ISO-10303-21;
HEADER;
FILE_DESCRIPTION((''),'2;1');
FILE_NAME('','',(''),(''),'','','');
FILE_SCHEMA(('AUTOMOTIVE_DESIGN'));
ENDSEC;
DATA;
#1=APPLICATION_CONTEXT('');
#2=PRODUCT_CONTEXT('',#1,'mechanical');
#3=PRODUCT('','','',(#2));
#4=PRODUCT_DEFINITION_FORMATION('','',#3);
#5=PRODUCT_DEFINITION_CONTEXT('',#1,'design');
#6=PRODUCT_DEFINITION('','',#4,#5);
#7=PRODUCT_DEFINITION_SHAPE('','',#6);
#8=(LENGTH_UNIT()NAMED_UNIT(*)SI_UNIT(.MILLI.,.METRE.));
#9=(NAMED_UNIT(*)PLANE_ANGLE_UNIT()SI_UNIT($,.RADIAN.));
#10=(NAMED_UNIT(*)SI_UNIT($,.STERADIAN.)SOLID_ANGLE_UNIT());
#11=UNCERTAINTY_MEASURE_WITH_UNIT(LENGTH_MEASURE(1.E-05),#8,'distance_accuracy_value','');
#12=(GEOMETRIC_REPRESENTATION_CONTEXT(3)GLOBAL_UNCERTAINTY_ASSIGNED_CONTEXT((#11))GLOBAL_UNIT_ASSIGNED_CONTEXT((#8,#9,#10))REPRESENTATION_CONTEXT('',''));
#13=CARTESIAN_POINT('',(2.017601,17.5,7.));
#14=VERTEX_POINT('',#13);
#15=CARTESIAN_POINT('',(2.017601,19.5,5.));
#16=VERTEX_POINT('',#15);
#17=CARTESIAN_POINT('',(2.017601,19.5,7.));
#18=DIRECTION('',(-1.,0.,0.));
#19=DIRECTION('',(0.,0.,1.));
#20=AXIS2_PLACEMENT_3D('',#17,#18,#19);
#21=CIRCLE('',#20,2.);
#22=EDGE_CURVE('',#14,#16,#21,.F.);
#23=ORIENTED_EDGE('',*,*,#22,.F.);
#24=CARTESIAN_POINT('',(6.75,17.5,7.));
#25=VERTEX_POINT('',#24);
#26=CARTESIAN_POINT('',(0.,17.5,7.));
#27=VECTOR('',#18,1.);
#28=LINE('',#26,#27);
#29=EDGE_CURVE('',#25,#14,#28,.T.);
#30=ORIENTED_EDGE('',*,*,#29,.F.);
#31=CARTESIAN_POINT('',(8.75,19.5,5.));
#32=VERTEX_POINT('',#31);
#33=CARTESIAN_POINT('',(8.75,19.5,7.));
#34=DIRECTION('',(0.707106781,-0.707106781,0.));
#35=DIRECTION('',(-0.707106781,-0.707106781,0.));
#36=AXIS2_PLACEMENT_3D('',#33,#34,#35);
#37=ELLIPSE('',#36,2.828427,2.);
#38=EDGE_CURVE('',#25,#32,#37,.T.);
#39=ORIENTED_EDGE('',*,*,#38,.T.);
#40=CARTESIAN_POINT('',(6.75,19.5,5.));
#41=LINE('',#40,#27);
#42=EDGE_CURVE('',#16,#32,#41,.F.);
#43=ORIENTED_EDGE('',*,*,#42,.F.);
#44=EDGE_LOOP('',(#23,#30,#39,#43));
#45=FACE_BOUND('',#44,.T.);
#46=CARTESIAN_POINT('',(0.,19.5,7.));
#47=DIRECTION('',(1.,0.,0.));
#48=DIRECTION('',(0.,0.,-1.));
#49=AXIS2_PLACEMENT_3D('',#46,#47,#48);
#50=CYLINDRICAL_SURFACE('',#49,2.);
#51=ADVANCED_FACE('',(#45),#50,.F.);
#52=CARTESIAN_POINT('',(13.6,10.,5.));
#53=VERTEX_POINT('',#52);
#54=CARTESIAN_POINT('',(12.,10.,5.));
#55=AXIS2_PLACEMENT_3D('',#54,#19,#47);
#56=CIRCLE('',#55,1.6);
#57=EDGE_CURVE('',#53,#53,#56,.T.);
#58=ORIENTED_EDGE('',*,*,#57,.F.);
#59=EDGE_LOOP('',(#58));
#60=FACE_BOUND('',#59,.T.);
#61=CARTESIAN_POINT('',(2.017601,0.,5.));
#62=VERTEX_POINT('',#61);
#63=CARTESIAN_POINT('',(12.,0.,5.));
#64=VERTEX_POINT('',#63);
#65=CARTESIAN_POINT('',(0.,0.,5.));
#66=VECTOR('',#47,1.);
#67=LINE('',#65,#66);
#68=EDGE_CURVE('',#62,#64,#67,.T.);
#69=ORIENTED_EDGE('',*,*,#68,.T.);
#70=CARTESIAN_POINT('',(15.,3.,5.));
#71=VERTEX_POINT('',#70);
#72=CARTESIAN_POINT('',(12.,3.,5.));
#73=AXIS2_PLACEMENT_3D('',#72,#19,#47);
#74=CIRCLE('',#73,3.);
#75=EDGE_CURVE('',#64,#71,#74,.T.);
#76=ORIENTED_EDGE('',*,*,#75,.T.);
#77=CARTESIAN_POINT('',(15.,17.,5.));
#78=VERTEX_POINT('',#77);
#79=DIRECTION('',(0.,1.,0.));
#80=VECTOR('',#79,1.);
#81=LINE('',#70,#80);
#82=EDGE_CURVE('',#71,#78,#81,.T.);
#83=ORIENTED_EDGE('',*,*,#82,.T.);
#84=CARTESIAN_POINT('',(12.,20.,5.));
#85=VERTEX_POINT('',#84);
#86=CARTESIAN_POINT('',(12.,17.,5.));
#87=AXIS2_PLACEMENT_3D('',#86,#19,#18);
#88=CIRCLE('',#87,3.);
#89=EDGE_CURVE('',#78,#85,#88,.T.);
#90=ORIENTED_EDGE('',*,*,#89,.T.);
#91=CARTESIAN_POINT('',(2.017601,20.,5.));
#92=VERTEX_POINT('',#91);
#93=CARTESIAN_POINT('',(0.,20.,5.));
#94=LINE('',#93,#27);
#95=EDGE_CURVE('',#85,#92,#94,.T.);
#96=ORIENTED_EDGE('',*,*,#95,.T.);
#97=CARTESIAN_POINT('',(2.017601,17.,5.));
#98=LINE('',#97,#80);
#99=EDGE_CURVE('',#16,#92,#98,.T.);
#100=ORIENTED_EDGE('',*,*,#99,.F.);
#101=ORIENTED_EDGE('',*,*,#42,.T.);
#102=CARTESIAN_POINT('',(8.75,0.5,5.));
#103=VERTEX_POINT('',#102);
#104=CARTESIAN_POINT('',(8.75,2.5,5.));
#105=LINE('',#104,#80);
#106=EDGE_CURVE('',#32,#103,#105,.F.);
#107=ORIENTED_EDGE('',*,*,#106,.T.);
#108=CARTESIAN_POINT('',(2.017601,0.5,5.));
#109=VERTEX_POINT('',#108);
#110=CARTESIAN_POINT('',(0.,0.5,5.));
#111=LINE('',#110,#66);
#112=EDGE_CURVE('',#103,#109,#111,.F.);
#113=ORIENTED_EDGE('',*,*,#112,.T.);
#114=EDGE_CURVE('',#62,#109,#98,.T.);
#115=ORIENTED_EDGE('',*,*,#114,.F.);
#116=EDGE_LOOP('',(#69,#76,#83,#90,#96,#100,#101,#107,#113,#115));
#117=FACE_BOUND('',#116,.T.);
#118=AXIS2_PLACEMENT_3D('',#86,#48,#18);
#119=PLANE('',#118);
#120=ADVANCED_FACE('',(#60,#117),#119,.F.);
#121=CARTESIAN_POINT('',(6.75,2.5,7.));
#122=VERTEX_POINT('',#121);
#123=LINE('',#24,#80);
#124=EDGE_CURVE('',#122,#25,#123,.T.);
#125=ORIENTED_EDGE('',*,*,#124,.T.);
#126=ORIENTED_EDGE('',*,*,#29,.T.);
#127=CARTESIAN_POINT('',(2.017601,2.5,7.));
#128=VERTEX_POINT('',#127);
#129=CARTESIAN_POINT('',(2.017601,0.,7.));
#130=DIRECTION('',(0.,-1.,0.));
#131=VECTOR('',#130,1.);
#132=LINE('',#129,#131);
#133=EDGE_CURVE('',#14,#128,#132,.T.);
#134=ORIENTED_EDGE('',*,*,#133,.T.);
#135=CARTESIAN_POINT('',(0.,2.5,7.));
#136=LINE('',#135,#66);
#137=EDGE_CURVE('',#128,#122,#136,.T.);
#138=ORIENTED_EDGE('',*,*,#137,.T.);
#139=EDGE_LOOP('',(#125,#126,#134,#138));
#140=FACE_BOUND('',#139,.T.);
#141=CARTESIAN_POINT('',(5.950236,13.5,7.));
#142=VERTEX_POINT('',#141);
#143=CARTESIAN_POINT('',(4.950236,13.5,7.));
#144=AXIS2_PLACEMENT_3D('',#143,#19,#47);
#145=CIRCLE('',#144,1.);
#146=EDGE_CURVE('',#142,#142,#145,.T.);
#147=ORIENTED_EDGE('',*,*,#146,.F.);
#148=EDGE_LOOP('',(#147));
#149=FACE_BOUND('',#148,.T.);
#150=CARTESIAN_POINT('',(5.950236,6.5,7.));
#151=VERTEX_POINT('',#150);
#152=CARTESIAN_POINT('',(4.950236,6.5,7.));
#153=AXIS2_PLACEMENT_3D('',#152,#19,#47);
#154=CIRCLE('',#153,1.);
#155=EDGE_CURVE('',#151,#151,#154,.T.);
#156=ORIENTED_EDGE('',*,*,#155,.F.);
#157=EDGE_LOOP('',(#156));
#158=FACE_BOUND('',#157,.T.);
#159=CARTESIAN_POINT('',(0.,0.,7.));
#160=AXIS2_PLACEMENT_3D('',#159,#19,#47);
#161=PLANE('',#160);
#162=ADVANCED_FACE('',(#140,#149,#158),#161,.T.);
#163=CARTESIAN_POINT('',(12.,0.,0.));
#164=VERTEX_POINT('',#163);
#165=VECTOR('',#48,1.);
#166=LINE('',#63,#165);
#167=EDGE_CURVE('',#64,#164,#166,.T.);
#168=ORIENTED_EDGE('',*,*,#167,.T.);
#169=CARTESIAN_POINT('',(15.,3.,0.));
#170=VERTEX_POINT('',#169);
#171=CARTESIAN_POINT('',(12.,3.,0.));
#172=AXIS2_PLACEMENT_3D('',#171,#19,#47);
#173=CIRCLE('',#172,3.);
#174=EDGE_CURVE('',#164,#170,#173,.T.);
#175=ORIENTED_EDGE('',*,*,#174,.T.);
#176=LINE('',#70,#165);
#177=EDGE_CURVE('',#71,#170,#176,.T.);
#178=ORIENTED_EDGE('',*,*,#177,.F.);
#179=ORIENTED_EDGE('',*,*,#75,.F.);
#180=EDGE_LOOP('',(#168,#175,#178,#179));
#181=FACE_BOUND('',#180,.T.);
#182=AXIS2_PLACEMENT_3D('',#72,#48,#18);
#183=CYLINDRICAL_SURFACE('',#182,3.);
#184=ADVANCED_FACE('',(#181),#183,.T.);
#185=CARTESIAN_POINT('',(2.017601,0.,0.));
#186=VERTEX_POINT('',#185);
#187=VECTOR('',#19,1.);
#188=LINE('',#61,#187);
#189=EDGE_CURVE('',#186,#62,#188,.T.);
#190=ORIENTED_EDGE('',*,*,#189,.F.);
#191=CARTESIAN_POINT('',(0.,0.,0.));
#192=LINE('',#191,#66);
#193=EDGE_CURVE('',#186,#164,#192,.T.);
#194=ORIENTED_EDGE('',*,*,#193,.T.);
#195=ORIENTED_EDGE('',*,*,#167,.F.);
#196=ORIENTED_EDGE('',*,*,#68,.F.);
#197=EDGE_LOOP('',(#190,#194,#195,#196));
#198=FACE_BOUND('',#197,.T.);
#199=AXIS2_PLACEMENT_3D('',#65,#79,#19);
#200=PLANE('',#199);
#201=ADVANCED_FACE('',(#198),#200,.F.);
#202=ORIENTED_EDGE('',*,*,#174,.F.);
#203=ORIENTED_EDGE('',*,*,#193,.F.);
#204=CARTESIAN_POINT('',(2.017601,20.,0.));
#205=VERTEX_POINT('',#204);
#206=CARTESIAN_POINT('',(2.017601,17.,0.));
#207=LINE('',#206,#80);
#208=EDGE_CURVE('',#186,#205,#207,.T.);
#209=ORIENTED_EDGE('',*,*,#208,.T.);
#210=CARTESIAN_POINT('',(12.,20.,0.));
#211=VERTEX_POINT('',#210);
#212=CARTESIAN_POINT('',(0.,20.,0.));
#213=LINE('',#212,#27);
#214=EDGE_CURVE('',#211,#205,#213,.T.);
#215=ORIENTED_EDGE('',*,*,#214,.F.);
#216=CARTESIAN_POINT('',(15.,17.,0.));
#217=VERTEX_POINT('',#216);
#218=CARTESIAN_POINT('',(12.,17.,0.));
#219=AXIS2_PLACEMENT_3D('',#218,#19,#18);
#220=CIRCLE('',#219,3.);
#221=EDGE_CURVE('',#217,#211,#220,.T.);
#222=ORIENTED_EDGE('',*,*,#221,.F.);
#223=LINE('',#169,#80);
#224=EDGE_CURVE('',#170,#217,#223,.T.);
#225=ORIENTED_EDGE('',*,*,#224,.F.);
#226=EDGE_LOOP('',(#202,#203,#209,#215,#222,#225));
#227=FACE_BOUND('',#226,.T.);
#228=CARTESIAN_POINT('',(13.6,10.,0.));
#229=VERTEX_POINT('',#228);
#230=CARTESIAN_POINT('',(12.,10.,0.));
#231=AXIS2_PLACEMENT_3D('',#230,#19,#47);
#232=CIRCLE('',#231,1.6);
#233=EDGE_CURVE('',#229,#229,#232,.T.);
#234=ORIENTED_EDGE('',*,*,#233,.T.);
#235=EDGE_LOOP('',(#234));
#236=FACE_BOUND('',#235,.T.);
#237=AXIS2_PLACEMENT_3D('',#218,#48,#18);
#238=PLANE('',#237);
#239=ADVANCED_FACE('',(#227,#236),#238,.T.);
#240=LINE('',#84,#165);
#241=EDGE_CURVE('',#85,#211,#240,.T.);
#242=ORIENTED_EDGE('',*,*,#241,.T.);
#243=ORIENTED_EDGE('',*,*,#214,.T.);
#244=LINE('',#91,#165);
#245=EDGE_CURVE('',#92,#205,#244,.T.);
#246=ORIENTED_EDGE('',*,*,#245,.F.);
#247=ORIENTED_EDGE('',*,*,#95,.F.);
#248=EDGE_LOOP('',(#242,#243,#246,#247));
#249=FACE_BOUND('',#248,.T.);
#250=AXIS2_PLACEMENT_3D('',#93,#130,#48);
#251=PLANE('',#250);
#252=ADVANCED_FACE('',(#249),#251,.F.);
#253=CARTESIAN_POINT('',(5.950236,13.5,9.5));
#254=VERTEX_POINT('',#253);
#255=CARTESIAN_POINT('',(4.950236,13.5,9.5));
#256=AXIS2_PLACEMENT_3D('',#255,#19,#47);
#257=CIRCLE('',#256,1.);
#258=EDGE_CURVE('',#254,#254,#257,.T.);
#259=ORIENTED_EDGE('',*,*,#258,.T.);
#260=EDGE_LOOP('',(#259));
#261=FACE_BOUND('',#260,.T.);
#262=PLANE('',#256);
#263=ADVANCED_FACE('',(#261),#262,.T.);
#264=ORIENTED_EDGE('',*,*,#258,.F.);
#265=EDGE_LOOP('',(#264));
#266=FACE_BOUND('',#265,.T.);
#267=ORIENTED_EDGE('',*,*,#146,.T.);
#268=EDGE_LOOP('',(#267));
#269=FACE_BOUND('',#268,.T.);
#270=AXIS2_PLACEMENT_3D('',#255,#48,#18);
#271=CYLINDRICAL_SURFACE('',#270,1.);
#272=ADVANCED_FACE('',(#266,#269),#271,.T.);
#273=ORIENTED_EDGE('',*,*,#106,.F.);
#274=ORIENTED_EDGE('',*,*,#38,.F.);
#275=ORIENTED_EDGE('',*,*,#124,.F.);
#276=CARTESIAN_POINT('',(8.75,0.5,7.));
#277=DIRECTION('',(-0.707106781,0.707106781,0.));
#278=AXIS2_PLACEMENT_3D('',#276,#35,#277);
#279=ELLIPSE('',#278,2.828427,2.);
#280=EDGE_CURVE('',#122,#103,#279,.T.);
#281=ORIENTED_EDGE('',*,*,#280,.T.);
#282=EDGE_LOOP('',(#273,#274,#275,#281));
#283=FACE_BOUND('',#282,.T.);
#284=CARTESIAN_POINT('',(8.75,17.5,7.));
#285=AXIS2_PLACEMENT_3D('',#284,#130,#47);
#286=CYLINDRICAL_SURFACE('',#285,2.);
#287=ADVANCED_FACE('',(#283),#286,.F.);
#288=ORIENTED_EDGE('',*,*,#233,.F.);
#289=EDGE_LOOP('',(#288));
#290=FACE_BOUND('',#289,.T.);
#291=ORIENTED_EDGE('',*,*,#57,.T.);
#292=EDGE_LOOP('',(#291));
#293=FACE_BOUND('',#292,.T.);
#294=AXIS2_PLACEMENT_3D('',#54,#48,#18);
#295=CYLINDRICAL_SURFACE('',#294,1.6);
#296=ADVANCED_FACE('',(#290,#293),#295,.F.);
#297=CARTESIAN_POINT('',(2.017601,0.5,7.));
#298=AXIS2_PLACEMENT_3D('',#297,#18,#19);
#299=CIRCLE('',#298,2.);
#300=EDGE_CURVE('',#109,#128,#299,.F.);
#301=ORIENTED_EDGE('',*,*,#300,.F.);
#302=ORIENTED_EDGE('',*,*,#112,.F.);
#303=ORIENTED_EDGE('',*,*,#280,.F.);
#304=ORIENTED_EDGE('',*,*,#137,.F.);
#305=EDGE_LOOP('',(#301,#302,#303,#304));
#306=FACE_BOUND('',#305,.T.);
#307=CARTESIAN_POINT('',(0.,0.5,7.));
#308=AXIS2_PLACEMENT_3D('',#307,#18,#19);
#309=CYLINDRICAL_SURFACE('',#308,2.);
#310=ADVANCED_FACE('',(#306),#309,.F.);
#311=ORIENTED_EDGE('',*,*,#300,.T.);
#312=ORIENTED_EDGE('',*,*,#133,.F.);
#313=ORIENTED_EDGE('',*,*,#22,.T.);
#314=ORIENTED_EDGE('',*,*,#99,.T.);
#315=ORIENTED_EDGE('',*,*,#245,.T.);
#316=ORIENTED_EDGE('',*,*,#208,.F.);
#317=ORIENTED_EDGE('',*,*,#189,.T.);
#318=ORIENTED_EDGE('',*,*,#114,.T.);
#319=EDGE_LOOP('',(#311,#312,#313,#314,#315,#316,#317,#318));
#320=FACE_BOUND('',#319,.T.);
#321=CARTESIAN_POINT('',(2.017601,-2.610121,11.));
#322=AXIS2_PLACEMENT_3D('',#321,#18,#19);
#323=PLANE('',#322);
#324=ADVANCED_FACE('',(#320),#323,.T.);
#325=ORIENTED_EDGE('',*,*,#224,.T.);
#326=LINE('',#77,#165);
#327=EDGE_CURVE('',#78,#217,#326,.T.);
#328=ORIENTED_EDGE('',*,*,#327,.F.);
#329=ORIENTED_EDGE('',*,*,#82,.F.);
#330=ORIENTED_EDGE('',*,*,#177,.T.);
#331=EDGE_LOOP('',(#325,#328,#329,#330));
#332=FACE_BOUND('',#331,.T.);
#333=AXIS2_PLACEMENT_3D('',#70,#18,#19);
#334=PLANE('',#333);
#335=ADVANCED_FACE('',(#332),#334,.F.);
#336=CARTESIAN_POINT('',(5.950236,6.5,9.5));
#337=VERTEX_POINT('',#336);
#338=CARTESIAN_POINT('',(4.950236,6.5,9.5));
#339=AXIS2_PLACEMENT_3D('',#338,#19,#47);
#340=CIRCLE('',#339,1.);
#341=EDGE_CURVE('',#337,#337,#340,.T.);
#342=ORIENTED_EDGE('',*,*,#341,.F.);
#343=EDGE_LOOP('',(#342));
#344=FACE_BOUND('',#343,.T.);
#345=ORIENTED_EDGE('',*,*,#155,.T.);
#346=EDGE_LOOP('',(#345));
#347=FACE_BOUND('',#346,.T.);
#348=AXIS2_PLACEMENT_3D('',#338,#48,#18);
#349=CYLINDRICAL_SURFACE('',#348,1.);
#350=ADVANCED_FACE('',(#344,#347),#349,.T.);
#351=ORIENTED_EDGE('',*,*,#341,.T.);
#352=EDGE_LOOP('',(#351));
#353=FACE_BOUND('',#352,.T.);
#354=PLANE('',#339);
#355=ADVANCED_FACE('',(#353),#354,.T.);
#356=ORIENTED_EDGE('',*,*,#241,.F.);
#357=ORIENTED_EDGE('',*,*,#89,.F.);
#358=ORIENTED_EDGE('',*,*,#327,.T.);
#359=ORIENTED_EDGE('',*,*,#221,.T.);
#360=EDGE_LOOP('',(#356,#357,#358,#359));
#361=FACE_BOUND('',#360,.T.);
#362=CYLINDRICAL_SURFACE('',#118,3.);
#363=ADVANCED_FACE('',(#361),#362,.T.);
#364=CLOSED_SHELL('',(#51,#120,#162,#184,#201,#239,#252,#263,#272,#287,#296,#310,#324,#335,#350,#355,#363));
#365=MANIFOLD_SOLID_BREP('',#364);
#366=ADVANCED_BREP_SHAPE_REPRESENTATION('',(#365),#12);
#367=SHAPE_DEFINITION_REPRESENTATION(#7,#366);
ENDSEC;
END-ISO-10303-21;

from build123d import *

# Parameters (mm, degrees)
CROQUIS1_R                 = 1.6
SALIENTE_EXTRUIR1_DEPTH    = 5
CROQUIS2_W                 = 6.75
CROQUIS2_H                 = 15
SALIENTE_EXTRUIR2_DEPTH    = 2
REDONDEO1_R                = 2
CROQUIS3_R                 = 1
SALIENTE_EXTRUIR3_DEPTH    = 2.5
CORTAR_EXTRUIR2_DEPTH      = 6
CORTAR_EXTRUIR2_DEPTH_BACK = 6
CROQUIS4_W                 = 6.920457475
CROQUIS4_H                 = 24.995599696


with BuildPart() as part:
    # Croquis1 → Saliente-Extruir1 (new body)
    with BuildSketch(Plane.XY):
        with BuildLine():
            Line((0, 0), (12, 0))
            ThreePointArc((12, 0), (14.121320344, 0.878679656), (15, 3))
            Line((15, 3), (15, 17))
            ThreePointArc((15, 17), (14.121320344, 19.121320344), (12, 20))
            Line((12, 20), (0, 20))
            Line((0, 20), (0, 0))
        make_face()
        with Locations((12, 10)):
            Circle(CROQUIS1_R, mode=Mode.SUBTRACT)
    extrude(amount=SALIENTE_EXTRUIR1_DEPTH)

    # Croquis2 → Saliente-Extruir2 (add)
    with BuildSketch(Plane.XY.offset(5)):
        with Locations((3.375, 10)):
            Rectangle(CROQUIS2_W, CROQUIS2_H)
    extrude(amount=SALIENTE_EXTRUIR2_DEPTH)

    # Redondeo1
    redondeo1_edges = [part.edges().sort_by_distance(p)[0] for p in [
        (3.375, 17.5, 5),
        (6.75, 10, 5),
        (3.375, 2.5, 5),
    ]]
    fillet(redondeo1_edges, radius=REDONDEO1_R - 0.0001)  # a hair under: the kernel refuses the full size

    # Croquis3 → Saliente-Extruir3 (add)
    with BuildSketch(Plane.XY.offset(7)):
        with Locations((4.95023571, 13.5)):
            Circle(CROQUIS3_R)
        with Locations((4.95023571, 6.5)):
            Circle(CROQUIS3_R)
    extrude(amount=SALIENTE_EXTRUIR3_DEPTH)

    # Croquis4 → Cortar-Extruir2 (cut, two sides: drawn at the far end of the back side and taken through both)
    with BuildSketch(Plane.XY.offset(5).offset(-CORTAR_EXTRUIR2_DEPTH_BACK)):
        with Locations((-1.442627952, 9.887678484)):
            Rectangle(CROQUIS4_W, CROQUIS4_H)
    extrude(amount=CORTAR_EXTRUIR2_DEPTH + CORTAR_EXTRUIR2_DEPTH_BACK, mode=Mode.SUBTRACT)


solid = part.part
